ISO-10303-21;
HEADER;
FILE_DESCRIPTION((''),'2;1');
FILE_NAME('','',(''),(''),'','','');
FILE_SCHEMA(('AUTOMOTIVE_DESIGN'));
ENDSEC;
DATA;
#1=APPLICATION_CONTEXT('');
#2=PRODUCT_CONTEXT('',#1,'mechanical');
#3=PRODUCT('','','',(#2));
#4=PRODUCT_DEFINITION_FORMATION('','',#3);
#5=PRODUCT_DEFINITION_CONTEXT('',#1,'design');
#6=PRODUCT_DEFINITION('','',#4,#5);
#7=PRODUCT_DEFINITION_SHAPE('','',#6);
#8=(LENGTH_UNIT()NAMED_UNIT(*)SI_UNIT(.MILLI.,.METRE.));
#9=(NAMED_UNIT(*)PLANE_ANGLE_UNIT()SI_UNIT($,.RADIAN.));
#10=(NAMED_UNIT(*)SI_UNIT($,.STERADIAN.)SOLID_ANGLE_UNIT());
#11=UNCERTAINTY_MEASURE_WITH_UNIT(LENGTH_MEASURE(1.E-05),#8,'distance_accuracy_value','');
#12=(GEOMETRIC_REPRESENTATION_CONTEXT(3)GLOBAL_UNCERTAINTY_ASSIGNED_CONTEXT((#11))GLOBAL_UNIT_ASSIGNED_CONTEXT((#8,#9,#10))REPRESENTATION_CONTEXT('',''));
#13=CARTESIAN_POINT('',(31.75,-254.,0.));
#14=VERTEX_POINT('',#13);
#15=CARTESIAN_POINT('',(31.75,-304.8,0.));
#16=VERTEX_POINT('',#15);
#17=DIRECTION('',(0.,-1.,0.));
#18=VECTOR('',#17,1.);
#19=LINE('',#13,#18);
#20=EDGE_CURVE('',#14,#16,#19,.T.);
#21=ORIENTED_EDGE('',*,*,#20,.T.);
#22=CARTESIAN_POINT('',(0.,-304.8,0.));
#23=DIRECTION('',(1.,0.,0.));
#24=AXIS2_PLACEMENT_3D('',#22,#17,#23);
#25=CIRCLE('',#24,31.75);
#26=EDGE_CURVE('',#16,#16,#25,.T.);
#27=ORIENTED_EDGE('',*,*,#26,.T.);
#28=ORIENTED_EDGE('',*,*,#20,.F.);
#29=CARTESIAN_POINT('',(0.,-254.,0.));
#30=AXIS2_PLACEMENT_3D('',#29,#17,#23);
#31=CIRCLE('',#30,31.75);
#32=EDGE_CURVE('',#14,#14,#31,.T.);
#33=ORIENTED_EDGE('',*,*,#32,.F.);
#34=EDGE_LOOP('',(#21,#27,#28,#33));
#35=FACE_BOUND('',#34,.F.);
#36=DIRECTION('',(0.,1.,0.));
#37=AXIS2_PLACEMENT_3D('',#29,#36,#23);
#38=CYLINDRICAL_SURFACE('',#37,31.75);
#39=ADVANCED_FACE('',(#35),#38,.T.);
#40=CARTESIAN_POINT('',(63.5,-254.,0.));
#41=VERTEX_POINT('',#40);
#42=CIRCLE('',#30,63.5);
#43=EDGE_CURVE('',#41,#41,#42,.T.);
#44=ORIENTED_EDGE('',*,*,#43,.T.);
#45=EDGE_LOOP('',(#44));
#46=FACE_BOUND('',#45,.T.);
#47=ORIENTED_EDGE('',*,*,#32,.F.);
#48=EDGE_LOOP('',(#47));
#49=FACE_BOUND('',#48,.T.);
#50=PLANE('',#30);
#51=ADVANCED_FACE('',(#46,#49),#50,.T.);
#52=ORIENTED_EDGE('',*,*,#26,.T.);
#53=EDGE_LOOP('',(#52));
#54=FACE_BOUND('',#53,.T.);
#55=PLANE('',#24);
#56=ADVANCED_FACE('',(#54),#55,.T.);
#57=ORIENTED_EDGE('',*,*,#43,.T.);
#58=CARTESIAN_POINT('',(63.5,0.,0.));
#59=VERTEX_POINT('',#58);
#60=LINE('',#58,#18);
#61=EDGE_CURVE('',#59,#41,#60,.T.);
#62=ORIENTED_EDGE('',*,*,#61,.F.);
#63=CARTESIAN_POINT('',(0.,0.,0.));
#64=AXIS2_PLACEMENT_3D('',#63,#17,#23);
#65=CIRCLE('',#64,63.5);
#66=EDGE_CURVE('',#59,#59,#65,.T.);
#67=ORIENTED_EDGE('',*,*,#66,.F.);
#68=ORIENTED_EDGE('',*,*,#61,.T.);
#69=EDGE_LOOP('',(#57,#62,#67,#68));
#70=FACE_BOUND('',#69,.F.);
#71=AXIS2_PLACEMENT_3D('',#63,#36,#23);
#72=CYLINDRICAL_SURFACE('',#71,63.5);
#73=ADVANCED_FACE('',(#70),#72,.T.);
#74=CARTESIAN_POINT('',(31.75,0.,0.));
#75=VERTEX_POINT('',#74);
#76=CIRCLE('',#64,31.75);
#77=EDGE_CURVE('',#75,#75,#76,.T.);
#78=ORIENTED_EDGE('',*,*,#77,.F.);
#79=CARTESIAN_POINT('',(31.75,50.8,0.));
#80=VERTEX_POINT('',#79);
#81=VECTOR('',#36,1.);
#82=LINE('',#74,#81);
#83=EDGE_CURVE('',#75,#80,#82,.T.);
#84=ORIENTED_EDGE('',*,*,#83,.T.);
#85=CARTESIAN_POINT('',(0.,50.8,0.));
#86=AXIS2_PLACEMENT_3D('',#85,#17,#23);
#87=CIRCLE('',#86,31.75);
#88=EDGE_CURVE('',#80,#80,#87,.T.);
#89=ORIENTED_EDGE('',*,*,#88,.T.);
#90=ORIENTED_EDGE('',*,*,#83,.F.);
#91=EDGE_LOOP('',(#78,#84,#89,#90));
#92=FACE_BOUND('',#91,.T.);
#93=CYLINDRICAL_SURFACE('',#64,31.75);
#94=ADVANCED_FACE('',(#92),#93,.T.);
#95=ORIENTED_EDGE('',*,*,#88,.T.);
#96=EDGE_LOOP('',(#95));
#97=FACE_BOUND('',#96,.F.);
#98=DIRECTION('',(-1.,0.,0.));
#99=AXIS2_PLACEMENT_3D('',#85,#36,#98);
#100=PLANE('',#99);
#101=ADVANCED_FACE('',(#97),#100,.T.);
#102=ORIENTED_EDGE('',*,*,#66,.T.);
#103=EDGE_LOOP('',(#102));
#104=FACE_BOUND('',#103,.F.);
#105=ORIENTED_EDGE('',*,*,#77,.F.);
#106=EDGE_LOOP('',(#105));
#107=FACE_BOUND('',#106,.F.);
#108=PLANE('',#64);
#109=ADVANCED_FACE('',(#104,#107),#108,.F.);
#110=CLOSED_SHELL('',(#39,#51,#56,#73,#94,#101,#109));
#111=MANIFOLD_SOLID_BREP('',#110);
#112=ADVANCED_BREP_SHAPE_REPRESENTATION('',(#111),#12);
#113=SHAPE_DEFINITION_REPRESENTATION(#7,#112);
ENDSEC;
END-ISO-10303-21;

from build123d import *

# Parameters (mm, degrees)
F0_R     = 63.5
F1_DEPTH = 254
F2_R     = 31.75
F3_DEPTH = 50.8


# Not quite as in the source:
# - a pattern or mirror of a feature is missing from the dataset's text; its kind, count and spacing are read off the source's solid


with BuildPart() as f1:
    # F0 (on Front) → F1 (new body)
    with BuildSketch(Plane.XZ):
        Circle(F0_R)
    extrude(amount=F1_DEPTH)

    # F2 (on face) → F3 (join)
    with BuildSketch(Plane.XZ.offset(254)):
        Circle(F2_R)
    f3 = extrude(amount=F3_DEPTH)

    # F3_copies: F3 across plane
    add(f3.mirror(Plane.ZX.offset(-127)))


solid = f1.part
